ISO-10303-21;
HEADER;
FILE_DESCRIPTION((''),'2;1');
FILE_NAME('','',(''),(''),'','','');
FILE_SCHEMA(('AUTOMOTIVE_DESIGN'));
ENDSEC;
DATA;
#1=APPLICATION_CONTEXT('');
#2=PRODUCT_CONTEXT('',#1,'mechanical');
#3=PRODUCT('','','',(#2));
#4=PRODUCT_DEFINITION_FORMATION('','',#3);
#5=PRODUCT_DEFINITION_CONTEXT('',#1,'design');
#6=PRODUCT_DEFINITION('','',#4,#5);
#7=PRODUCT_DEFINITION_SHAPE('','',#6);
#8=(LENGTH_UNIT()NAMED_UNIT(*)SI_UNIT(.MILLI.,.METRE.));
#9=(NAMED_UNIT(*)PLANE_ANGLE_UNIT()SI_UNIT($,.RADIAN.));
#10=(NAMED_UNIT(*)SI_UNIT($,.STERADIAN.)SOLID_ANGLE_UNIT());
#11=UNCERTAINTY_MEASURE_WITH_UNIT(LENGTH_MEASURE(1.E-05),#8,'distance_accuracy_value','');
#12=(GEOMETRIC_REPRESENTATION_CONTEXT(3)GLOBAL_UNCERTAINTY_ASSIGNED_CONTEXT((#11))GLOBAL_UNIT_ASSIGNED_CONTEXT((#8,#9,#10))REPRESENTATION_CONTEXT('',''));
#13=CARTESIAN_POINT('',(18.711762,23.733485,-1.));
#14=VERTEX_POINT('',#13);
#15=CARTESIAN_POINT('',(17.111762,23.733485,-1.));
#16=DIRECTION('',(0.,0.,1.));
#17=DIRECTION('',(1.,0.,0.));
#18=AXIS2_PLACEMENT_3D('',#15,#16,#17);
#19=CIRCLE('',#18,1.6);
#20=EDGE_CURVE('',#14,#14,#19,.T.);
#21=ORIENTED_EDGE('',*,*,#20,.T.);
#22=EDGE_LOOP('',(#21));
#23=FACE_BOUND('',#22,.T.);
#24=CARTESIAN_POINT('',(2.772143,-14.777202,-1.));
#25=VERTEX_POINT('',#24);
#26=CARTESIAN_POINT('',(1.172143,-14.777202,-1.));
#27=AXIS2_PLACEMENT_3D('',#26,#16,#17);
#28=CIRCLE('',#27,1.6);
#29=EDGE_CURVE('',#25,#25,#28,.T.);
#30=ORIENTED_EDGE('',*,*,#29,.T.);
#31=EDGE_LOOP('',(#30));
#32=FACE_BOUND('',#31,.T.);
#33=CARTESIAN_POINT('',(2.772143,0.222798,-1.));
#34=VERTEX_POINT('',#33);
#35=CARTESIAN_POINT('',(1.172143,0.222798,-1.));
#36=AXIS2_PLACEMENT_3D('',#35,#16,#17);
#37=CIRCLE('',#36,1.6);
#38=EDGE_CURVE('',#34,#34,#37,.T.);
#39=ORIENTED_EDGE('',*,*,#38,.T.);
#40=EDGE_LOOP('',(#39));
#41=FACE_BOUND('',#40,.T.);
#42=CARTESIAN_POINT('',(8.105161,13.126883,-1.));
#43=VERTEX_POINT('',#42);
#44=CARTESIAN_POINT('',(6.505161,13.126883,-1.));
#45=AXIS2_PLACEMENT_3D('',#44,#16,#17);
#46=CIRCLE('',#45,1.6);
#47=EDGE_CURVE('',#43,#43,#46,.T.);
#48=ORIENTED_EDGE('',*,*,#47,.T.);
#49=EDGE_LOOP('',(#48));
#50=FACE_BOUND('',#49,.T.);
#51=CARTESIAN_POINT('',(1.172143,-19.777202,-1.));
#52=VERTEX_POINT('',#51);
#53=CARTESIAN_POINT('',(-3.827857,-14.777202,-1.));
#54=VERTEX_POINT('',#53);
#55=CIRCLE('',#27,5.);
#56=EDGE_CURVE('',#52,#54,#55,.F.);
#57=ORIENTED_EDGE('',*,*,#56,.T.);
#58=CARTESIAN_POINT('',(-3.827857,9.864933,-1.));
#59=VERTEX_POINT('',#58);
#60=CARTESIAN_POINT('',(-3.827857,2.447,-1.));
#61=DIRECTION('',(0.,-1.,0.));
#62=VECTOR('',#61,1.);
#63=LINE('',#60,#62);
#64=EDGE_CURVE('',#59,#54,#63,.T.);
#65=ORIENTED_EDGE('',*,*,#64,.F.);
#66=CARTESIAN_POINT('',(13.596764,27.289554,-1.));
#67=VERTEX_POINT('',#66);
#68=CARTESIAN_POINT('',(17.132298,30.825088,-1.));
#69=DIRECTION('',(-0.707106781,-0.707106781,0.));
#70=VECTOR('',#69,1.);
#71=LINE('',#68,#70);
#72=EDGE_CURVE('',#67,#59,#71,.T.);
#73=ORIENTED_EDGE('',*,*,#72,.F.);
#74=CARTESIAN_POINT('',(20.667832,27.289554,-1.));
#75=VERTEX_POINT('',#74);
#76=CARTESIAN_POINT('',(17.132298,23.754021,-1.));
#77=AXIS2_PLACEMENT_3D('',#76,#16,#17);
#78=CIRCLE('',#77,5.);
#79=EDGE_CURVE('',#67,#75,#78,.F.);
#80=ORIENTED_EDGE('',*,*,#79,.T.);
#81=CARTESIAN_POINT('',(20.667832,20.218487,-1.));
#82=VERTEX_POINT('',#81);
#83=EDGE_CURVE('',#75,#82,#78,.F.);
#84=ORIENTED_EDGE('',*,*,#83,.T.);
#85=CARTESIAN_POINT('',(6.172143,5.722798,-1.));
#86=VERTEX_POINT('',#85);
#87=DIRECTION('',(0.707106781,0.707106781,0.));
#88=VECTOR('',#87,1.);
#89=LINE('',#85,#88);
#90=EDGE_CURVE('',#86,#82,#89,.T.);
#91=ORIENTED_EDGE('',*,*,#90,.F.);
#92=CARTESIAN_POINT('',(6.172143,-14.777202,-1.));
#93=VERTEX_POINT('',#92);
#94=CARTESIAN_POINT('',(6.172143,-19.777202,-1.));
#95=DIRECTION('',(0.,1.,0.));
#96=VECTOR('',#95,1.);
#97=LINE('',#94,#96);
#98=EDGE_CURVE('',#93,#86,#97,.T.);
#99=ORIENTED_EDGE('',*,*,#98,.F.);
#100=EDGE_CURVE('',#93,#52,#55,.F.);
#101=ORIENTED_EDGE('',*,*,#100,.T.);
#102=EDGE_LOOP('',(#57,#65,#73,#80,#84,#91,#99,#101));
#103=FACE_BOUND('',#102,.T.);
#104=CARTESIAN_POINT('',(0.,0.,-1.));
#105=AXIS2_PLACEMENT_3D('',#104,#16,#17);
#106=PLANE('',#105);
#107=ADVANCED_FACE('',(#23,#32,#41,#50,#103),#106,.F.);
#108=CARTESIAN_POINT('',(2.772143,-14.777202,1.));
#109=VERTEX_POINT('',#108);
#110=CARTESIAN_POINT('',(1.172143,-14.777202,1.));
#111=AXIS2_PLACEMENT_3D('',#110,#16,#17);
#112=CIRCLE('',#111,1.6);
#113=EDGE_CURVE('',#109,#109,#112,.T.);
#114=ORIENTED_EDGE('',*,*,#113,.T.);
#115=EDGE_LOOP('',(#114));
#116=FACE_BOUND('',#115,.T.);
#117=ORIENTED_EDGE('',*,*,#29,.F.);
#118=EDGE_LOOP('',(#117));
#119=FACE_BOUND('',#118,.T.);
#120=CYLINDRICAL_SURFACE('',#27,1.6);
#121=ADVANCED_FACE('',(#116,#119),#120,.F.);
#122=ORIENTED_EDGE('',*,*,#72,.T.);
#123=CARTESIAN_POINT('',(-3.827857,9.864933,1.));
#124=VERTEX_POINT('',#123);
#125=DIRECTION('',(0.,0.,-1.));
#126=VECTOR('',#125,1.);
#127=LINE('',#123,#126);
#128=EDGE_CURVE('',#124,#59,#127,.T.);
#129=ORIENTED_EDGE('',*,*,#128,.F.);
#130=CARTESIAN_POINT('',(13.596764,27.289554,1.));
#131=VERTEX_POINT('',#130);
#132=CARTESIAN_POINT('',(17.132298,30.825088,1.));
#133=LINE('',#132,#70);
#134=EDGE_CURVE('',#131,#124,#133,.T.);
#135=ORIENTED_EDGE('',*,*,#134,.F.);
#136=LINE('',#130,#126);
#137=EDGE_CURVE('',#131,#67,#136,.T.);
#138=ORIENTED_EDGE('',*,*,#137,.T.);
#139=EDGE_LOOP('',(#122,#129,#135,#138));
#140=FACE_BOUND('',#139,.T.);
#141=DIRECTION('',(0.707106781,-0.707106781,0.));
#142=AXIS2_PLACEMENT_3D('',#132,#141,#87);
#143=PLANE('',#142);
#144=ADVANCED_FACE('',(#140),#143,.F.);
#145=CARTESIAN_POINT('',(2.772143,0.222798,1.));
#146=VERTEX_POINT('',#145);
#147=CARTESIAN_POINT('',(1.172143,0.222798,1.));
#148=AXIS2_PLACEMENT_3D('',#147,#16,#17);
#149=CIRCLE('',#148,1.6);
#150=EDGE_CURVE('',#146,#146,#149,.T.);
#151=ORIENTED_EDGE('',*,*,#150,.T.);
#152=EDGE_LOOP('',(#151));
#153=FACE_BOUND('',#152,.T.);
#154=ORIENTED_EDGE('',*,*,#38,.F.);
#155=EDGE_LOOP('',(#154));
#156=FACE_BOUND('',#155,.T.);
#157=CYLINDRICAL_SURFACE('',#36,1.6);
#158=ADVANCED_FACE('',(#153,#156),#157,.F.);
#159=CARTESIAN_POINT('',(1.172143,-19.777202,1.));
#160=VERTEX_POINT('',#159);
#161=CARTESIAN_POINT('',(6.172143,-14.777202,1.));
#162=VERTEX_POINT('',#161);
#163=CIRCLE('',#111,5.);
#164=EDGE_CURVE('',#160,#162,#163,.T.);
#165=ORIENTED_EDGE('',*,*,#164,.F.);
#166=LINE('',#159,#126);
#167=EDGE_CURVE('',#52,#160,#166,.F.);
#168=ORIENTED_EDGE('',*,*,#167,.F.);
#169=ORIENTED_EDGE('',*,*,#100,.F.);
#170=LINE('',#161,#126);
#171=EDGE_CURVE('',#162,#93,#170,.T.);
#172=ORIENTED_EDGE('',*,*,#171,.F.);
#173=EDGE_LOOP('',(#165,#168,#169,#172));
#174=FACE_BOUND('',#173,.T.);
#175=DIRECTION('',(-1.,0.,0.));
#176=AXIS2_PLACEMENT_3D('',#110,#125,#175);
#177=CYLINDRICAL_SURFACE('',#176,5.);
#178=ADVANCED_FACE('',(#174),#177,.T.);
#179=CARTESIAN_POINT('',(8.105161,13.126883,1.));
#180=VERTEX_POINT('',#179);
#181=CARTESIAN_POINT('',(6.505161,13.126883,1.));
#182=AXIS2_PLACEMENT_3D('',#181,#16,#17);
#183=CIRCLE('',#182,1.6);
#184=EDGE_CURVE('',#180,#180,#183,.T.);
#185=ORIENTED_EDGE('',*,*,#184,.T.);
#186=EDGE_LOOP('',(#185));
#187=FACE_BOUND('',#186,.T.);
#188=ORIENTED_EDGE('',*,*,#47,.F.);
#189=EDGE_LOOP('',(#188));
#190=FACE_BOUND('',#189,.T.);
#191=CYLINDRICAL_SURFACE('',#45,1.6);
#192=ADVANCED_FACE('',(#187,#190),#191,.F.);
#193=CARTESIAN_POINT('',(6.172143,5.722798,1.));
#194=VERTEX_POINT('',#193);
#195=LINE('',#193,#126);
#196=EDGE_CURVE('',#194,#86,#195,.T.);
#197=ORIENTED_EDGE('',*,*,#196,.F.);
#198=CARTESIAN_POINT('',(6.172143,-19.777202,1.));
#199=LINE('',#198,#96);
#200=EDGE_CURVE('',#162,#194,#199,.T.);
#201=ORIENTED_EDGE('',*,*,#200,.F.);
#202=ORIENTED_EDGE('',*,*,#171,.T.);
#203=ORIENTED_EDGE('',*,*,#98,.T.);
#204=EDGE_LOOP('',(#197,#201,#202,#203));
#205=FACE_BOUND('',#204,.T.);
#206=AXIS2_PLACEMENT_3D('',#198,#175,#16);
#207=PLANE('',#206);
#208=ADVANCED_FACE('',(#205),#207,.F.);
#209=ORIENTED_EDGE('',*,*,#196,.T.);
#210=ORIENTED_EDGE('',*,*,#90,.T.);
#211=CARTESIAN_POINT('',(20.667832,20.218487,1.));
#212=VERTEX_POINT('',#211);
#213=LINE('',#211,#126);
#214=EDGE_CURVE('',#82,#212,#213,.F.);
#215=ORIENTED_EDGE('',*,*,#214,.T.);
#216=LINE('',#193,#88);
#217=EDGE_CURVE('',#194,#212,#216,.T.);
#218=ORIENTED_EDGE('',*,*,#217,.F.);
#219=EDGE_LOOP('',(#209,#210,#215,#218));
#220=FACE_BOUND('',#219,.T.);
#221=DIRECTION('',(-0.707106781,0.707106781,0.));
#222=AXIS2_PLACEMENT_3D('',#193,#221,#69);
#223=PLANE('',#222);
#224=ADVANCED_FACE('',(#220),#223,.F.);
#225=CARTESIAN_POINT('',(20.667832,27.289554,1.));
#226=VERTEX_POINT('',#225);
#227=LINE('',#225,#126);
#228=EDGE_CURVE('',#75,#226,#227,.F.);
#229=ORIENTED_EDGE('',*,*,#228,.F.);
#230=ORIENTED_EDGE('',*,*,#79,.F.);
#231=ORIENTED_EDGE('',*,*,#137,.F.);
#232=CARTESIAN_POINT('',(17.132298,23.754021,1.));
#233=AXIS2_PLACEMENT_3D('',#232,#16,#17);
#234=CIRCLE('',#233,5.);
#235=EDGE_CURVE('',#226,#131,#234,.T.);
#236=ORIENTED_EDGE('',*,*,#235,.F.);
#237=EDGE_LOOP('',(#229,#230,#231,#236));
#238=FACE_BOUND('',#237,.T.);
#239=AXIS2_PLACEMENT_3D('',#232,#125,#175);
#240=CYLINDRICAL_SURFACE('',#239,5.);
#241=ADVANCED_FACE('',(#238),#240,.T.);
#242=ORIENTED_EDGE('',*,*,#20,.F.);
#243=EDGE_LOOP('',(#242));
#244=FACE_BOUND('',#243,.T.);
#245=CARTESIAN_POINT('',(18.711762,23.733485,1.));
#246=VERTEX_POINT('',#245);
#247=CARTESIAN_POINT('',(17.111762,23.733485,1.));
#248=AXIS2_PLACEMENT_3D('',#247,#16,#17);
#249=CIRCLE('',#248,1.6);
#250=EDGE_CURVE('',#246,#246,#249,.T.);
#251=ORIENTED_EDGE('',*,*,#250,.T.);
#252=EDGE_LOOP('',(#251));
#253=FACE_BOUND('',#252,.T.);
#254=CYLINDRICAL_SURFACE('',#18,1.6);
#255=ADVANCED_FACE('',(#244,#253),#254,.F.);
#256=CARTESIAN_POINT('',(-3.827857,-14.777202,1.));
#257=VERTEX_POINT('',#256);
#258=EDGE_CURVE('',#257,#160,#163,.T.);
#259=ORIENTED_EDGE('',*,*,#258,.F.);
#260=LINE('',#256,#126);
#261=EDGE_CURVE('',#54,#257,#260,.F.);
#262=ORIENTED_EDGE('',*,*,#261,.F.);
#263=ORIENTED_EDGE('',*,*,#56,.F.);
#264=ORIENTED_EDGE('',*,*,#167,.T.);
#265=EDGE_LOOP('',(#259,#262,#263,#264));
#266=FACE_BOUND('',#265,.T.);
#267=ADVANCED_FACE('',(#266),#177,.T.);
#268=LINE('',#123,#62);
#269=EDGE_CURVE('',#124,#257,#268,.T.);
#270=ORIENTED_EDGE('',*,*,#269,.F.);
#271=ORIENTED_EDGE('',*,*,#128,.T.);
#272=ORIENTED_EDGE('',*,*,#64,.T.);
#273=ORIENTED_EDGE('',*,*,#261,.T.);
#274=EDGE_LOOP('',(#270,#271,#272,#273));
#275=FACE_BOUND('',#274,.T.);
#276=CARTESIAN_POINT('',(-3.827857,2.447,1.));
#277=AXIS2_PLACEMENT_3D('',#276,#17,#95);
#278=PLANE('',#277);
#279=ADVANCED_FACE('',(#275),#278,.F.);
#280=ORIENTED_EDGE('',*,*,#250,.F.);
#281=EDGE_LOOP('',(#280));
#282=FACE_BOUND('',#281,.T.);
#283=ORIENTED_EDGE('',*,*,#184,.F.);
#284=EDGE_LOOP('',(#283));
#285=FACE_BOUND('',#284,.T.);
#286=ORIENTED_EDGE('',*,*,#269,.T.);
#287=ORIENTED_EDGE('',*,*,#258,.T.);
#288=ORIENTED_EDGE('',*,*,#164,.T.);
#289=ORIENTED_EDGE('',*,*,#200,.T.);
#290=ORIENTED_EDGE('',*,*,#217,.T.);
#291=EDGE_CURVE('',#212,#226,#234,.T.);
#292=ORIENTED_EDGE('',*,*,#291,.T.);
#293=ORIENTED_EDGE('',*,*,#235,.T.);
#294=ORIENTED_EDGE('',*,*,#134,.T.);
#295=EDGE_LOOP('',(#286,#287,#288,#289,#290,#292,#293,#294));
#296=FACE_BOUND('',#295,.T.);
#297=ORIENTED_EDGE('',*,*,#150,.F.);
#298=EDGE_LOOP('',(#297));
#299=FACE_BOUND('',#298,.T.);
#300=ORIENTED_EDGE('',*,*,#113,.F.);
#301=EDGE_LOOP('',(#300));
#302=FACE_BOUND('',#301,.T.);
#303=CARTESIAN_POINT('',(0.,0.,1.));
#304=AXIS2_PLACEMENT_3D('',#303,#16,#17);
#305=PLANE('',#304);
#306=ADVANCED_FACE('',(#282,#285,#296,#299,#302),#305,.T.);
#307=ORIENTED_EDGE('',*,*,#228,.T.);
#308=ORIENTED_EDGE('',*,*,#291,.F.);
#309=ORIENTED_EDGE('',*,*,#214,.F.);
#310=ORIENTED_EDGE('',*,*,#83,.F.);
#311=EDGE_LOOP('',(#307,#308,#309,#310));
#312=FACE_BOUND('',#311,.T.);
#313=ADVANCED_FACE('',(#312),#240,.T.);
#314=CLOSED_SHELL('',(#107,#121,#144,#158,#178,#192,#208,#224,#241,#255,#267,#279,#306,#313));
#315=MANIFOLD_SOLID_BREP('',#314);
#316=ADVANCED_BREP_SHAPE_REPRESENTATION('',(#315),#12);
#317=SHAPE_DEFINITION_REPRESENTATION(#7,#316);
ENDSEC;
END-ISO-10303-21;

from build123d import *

# Parameters (mm, degrees)
EXTRUDE_1_DEPTH     = 1
FILLET_1_R          = 5
SKETCH_2_R          = 1.6
CUT_EXTRUDE_1_DEPTH = 37.340563377


with BuildPart() as part:
    # ｽｹｯﾁ1 → ﾎﾞｽ - 押し出し1 (new, symmetric)
    with BuildSketch(Plane.XY):
        Polygon((-3.827856705, 2.446999561), (-3.827856705, -19.777202359), (6.172143295, -19.777202359), (6.172143295, 5.722797641), (24.203366215, 23.754020561), (17.132298403, 30.825088373), (-3.827856705, 9.864933264), align=None)
    extrude(amount=EXTRUDE_1_DEPTH, both=True)

    # ﾌｨﾚｯﾄ1
    fillet_1_edges = [part.edges().sort_by_distance(p)[0] for p in [
        (17.132298403, 30.825088373, 0),
        (-3.827856705, -19.777202359, 0),
        (6.172143295, -19.777202359, 0),
        (24.203366215, 23.754020561, 0),
    ]]
    fillet(fillet_1_edges, radius=FILLET_1_R - 0.0001)  # a hair under: the kernel refuses the full size

    # ｽｹｯﾁ2 → ｶｯﾄ - 押し出し1 (cut, through all)
    with BuildSketch(Plane.XY.offset(1)):
        with Locations((1.172143295, 0.222797641)):
            Circle(SKETCH_2_R)
        with Locations((1.172143295, -14.777202359)):
            Circle(SKETCH_2_R)
        with Locations((6.505160691, 13.126882849)):
            Circle(SKETCH_2_R)
        with Locations((17.111762409, 23.733484566)):
            Circle(SKETCH_2_R)
    extrude(amount=-CUT_EXTRUDE_1_DEPTH, mode=Mode.SUBTRACT)


solid = part.part
